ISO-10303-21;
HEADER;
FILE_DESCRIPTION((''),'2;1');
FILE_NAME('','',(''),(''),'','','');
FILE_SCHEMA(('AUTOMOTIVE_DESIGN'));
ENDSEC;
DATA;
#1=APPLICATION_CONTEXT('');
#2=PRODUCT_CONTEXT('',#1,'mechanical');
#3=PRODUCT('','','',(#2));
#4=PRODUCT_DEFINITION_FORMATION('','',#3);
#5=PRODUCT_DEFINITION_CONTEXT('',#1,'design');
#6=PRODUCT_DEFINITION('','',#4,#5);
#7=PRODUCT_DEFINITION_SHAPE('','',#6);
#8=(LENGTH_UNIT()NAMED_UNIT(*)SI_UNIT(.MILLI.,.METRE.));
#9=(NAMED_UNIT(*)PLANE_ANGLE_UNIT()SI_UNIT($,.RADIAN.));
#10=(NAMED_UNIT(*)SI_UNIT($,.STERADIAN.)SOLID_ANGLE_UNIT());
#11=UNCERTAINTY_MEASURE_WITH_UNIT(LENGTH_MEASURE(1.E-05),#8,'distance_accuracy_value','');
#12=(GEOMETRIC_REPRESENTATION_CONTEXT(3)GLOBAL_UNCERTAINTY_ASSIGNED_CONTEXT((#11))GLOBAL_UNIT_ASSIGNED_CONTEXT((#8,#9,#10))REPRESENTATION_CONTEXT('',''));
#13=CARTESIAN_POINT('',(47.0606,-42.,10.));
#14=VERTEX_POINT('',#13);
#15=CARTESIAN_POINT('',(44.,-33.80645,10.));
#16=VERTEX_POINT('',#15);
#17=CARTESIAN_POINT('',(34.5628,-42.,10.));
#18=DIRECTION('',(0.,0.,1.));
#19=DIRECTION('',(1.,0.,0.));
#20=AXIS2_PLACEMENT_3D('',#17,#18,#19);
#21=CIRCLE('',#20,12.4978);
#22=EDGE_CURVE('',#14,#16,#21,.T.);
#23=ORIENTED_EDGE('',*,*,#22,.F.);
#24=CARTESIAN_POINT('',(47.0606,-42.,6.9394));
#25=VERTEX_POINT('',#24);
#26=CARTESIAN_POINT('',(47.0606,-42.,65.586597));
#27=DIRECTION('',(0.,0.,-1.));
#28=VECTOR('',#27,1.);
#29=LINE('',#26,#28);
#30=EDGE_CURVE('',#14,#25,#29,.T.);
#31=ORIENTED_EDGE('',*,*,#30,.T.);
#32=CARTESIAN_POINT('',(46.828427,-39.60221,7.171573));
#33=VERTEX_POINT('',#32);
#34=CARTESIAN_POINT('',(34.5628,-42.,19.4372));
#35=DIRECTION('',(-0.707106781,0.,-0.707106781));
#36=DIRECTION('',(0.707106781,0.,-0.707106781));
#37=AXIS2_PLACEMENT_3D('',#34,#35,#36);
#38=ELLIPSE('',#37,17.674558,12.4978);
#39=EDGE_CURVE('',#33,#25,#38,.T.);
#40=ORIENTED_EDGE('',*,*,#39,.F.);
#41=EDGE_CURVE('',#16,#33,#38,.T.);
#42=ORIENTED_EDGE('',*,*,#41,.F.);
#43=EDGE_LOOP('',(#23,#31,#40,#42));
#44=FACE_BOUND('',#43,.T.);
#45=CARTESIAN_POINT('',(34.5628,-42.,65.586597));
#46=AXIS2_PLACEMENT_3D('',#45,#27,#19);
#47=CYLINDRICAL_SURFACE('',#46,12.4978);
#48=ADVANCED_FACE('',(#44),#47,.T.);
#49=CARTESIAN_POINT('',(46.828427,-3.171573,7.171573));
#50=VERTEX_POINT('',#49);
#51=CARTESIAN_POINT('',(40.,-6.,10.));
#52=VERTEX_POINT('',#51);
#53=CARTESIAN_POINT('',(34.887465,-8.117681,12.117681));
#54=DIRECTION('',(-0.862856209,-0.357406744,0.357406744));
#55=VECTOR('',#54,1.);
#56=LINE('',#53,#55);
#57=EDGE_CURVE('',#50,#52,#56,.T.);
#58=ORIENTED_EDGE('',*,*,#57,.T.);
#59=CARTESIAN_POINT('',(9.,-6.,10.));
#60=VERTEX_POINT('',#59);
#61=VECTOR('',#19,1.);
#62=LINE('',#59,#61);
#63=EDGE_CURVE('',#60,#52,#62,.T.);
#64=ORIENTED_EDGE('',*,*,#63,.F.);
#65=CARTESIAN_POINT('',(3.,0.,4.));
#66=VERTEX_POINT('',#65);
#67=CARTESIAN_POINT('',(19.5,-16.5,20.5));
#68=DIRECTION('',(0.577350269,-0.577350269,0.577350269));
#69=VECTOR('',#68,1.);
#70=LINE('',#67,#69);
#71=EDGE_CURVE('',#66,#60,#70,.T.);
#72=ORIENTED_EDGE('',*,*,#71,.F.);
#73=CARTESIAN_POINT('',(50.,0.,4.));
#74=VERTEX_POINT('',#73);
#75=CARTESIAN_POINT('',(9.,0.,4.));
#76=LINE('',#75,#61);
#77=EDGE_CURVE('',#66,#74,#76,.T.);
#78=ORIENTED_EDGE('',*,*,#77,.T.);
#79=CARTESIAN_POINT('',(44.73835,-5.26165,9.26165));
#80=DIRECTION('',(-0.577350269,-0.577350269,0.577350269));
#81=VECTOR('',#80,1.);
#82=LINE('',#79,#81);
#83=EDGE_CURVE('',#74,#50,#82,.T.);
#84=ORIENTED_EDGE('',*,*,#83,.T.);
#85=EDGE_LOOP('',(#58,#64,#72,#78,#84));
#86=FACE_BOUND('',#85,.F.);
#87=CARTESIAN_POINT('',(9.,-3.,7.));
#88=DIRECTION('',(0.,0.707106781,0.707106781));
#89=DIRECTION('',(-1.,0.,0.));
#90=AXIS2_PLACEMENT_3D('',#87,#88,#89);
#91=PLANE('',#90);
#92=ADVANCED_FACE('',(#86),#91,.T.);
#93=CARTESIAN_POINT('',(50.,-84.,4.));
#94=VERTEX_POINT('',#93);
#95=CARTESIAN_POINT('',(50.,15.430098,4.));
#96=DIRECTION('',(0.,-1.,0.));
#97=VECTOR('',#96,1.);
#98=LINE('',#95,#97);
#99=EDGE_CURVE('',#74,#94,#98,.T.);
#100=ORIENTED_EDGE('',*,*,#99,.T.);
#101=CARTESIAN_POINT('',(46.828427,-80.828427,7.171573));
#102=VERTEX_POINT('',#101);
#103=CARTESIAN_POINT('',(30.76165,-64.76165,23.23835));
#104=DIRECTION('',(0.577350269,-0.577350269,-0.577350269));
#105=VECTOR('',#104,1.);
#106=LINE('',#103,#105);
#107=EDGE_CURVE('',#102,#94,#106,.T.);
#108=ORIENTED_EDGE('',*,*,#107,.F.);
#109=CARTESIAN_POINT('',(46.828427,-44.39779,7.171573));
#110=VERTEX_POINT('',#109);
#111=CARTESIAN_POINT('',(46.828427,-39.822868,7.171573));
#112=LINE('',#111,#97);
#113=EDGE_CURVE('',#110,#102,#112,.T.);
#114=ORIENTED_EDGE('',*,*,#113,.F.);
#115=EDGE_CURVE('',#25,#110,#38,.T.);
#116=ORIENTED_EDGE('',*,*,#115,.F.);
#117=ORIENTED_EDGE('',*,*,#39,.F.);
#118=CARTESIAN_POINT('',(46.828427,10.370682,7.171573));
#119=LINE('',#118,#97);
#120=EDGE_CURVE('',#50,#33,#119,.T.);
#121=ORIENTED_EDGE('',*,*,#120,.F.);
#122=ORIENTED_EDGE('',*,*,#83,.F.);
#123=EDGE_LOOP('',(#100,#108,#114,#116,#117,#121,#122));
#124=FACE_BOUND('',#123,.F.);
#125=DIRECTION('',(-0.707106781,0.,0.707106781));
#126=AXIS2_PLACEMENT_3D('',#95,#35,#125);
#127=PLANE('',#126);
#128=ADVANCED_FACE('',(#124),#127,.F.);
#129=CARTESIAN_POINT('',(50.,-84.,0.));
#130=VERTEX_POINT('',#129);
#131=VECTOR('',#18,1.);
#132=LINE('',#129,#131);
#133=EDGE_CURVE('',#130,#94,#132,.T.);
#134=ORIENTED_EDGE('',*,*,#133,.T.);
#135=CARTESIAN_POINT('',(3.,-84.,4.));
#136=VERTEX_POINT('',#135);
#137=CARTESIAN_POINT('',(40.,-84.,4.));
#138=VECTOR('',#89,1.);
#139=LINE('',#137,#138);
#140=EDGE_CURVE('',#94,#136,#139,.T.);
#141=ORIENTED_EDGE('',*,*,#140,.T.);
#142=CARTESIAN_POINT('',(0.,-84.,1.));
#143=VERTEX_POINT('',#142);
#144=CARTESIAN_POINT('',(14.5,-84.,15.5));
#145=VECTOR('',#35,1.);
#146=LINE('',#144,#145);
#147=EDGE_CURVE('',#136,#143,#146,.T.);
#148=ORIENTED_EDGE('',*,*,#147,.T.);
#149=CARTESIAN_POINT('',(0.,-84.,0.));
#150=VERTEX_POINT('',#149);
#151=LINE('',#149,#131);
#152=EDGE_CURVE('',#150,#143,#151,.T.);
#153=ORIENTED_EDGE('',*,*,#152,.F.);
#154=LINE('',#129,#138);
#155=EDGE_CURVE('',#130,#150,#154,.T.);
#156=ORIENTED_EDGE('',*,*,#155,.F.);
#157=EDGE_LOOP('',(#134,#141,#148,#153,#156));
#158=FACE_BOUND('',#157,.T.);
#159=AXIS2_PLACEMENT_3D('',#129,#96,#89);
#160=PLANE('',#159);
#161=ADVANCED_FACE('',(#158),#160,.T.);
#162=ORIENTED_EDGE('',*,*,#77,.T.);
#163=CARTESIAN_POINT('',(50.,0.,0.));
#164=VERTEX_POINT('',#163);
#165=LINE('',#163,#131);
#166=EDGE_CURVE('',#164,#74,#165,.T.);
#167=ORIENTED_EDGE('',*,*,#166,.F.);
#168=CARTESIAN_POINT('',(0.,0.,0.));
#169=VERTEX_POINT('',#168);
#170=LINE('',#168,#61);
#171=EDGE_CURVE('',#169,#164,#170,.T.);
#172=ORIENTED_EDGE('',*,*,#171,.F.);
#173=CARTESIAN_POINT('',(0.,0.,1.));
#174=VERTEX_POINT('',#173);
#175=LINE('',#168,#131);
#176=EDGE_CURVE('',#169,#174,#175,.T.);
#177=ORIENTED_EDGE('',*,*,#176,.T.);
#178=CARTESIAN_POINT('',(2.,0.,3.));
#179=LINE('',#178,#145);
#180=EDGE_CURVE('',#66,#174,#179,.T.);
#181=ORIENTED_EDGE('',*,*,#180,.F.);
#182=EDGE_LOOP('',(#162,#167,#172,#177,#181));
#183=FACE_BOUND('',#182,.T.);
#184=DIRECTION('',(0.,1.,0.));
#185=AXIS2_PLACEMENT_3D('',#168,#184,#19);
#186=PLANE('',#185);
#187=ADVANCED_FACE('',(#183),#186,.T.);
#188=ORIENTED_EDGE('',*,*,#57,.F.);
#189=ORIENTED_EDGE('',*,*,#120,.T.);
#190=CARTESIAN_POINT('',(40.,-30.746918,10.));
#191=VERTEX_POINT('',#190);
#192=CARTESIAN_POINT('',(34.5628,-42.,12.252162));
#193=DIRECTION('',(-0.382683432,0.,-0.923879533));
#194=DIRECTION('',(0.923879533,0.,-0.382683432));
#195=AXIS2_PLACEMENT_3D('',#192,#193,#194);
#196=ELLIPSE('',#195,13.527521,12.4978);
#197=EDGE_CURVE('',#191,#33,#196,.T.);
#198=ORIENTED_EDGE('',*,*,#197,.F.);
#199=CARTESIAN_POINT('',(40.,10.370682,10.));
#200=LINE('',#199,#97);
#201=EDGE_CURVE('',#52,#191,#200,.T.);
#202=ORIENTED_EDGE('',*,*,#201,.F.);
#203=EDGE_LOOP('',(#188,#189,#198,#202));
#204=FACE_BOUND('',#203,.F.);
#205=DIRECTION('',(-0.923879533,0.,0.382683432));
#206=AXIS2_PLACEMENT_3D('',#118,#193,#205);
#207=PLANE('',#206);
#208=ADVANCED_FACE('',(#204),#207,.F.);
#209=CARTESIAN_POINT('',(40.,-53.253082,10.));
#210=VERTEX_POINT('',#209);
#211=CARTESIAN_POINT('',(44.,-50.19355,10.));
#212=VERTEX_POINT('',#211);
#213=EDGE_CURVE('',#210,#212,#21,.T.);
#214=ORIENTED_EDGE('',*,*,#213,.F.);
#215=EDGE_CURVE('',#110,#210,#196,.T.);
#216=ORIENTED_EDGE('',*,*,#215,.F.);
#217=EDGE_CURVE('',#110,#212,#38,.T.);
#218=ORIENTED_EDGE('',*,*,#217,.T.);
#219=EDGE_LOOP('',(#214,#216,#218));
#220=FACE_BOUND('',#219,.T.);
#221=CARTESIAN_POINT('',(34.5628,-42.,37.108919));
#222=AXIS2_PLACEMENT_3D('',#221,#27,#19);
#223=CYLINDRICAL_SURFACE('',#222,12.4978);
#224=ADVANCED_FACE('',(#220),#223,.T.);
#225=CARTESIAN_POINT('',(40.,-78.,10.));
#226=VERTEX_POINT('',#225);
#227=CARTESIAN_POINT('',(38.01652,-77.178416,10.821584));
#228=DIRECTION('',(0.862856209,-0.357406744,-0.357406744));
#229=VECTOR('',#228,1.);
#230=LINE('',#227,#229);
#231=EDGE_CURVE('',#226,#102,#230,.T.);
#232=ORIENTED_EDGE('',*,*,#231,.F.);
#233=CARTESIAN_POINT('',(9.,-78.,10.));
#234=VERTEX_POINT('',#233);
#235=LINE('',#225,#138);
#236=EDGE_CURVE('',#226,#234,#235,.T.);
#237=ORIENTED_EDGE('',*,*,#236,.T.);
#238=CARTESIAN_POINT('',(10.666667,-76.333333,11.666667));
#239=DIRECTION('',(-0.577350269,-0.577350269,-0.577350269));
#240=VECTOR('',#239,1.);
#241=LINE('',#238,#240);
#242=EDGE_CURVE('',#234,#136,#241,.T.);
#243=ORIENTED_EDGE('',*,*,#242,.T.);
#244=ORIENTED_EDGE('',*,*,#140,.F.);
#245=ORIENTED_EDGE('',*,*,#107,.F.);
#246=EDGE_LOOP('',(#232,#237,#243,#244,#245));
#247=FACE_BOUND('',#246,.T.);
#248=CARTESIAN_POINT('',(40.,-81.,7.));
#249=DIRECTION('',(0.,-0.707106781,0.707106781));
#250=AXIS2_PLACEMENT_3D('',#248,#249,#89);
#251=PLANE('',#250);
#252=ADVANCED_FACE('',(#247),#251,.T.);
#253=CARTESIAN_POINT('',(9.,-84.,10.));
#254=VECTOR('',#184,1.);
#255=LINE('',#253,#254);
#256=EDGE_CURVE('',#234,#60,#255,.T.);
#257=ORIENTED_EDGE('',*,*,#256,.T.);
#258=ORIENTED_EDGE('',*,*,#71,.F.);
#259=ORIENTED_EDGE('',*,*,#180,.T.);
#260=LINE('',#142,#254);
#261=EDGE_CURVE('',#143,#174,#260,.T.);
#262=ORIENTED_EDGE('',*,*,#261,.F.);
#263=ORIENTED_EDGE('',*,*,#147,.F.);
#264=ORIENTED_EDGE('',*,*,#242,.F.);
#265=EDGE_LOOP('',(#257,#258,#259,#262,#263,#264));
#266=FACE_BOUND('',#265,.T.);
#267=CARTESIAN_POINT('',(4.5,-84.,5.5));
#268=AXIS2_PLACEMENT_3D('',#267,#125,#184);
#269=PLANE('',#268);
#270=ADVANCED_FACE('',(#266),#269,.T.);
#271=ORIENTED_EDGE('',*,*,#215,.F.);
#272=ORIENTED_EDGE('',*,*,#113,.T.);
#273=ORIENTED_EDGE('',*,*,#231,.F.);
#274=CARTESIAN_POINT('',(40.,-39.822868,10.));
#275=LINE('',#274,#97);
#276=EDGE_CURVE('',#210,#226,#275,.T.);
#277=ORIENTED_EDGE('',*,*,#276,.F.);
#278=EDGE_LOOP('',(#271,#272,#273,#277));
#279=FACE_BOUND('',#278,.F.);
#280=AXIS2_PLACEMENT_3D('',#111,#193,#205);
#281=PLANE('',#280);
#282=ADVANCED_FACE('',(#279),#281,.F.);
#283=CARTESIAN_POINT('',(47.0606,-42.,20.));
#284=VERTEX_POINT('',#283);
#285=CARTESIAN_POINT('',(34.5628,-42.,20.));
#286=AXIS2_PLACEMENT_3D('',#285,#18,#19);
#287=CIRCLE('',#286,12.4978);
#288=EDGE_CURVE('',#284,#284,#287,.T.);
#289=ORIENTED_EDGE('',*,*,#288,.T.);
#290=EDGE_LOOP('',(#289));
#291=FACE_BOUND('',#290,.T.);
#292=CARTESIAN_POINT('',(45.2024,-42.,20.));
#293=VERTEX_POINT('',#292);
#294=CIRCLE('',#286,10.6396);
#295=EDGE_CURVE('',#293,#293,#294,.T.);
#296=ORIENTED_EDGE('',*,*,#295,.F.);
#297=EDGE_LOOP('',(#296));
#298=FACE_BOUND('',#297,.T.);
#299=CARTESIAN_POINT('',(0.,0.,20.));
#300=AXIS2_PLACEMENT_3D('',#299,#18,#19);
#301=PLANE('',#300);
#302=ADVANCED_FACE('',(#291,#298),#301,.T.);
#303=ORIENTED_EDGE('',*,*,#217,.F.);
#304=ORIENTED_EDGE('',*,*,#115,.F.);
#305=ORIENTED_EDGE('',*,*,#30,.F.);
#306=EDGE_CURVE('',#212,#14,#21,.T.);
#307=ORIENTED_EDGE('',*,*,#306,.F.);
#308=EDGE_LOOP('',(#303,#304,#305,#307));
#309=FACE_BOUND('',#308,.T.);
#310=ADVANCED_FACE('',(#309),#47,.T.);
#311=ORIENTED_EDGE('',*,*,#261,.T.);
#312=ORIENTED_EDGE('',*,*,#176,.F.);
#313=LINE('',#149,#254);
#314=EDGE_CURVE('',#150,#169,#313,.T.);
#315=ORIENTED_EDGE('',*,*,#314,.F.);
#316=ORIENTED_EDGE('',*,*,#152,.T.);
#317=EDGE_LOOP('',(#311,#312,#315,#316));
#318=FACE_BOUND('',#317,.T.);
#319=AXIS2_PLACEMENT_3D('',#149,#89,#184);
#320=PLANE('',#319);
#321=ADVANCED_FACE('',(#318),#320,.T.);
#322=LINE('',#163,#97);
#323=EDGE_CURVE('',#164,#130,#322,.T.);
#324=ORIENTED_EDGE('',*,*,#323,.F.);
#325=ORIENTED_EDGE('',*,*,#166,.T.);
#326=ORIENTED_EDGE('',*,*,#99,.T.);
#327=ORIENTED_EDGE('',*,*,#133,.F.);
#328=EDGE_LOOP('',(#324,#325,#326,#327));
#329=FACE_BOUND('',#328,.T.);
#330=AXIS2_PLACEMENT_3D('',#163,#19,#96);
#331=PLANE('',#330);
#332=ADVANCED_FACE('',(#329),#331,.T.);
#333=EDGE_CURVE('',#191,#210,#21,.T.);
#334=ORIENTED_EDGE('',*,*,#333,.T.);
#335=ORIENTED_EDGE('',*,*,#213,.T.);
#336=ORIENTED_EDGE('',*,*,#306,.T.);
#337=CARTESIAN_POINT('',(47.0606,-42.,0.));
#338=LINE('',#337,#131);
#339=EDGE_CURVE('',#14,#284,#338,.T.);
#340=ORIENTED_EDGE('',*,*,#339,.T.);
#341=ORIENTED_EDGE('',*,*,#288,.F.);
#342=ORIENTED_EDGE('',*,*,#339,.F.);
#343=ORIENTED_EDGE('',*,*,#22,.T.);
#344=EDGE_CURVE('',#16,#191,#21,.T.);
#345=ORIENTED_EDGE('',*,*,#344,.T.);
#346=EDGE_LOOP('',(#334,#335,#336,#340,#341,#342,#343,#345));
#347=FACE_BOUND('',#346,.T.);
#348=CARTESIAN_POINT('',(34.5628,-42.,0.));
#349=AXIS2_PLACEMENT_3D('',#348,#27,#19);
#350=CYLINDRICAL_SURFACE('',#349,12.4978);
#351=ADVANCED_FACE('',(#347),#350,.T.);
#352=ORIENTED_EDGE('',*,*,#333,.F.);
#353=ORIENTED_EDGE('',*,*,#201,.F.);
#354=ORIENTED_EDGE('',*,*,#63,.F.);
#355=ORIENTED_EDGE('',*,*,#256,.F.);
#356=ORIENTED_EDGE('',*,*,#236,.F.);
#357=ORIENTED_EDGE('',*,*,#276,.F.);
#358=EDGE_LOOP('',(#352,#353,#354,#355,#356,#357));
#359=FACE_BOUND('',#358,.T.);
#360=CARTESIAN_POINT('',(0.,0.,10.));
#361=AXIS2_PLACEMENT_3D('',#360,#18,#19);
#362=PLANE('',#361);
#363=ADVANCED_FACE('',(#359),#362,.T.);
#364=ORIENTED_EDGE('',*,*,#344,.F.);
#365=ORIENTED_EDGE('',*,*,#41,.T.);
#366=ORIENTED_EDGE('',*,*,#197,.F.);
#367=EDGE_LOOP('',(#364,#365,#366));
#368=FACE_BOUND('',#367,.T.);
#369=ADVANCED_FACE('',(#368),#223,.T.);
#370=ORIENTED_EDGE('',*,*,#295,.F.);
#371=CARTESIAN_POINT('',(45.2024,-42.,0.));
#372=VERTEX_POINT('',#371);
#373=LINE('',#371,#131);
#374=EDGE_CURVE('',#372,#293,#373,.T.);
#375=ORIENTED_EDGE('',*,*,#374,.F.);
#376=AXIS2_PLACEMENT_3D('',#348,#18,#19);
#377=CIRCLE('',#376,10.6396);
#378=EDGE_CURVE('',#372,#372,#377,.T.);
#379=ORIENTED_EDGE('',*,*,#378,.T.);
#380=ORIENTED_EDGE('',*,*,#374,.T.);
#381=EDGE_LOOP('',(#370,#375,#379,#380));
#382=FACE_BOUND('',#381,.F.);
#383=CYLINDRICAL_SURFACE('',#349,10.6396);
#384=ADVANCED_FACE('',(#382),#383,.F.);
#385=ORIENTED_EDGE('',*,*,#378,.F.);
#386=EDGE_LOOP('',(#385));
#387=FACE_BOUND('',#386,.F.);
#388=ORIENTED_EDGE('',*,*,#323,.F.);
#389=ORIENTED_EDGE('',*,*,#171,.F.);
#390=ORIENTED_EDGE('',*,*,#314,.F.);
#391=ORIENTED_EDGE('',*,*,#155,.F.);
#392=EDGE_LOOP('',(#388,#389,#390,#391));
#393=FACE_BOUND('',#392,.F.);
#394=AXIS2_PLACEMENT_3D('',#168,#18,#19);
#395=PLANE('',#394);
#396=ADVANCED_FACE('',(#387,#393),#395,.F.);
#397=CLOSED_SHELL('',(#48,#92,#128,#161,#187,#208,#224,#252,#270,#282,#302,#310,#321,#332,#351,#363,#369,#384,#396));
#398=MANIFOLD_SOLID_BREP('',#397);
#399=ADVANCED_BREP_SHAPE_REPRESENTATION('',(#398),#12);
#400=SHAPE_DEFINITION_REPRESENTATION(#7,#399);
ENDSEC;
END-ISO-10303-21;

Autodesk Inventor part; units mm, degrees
ref_plane "YZ Plane" through (0, 0, 0) normal (1, 0, 0) x (0, 1, 0)
ref_plane "XZ Plane" through (0, 0, 0) normal (0, 1, 0) x (-1, 0, 0)
ref_plane "XY Plane" through (0, 0, 0) normal (0, 0, 1) x (1, 0, 0)
sketch "Sketch1" plane through (0, 0, 0) normal (0, 0, 1) x (1, 0, 0)
  line L0 (0, 0) -> (50, 0)
  line L1 (50, 0) -> (50, -84)
  line L2 (50, -84) -> (0, -84)
  line L3 (0, -84) -> (0, 0)
  circle A0 centre (34.5628, -42) radius 12.4978
  circle A1 centre (34.5628, -42) radius 10.6396
  dimension "d0" = 50
  dimension "d1" = 84
extrude "Extrusion1" add sketch "Sketch1" along normal blind 10 contours L0 L1 L2 L3
extrude "Extrusion2" add sketch "Sketch1" along normal blind 20 contours A0
chamfer "Chamfer1" distance 6 angle 45 1 edges at (50, -42, 10)
chamfer "Chamfer2" distance 4 angle 45 2 edges at (44, -67.0968, 10) (44, -16.9032, 10)
chamfer "Chamfer3" distance 9 angle 45 1 edges at (0, -42, 10)
chamfer "Chamfer4" distance 6 angle 45 2 edges at (24.5, 0, 10) (24.5, -84, 10)
equation "\"BendRadius\" = Thickness"
equation "\"BendReliefWidth\" = Thickness"
equation "\"BendReliefDepth\" = 0.5 * Thickness"
equation "\"CornerReliefSize\" = 4 * Thickness"
equation "\"MinimumRemnant\" = 2 * Thickness"
equation "\"TransitionRadius\" = BendRadius"
equation "\"JacobiRadiusSize\" = BendRadius"
equation "\"GapSize\" = Thickness"
equation "\"Thickness\" = 0.5"
